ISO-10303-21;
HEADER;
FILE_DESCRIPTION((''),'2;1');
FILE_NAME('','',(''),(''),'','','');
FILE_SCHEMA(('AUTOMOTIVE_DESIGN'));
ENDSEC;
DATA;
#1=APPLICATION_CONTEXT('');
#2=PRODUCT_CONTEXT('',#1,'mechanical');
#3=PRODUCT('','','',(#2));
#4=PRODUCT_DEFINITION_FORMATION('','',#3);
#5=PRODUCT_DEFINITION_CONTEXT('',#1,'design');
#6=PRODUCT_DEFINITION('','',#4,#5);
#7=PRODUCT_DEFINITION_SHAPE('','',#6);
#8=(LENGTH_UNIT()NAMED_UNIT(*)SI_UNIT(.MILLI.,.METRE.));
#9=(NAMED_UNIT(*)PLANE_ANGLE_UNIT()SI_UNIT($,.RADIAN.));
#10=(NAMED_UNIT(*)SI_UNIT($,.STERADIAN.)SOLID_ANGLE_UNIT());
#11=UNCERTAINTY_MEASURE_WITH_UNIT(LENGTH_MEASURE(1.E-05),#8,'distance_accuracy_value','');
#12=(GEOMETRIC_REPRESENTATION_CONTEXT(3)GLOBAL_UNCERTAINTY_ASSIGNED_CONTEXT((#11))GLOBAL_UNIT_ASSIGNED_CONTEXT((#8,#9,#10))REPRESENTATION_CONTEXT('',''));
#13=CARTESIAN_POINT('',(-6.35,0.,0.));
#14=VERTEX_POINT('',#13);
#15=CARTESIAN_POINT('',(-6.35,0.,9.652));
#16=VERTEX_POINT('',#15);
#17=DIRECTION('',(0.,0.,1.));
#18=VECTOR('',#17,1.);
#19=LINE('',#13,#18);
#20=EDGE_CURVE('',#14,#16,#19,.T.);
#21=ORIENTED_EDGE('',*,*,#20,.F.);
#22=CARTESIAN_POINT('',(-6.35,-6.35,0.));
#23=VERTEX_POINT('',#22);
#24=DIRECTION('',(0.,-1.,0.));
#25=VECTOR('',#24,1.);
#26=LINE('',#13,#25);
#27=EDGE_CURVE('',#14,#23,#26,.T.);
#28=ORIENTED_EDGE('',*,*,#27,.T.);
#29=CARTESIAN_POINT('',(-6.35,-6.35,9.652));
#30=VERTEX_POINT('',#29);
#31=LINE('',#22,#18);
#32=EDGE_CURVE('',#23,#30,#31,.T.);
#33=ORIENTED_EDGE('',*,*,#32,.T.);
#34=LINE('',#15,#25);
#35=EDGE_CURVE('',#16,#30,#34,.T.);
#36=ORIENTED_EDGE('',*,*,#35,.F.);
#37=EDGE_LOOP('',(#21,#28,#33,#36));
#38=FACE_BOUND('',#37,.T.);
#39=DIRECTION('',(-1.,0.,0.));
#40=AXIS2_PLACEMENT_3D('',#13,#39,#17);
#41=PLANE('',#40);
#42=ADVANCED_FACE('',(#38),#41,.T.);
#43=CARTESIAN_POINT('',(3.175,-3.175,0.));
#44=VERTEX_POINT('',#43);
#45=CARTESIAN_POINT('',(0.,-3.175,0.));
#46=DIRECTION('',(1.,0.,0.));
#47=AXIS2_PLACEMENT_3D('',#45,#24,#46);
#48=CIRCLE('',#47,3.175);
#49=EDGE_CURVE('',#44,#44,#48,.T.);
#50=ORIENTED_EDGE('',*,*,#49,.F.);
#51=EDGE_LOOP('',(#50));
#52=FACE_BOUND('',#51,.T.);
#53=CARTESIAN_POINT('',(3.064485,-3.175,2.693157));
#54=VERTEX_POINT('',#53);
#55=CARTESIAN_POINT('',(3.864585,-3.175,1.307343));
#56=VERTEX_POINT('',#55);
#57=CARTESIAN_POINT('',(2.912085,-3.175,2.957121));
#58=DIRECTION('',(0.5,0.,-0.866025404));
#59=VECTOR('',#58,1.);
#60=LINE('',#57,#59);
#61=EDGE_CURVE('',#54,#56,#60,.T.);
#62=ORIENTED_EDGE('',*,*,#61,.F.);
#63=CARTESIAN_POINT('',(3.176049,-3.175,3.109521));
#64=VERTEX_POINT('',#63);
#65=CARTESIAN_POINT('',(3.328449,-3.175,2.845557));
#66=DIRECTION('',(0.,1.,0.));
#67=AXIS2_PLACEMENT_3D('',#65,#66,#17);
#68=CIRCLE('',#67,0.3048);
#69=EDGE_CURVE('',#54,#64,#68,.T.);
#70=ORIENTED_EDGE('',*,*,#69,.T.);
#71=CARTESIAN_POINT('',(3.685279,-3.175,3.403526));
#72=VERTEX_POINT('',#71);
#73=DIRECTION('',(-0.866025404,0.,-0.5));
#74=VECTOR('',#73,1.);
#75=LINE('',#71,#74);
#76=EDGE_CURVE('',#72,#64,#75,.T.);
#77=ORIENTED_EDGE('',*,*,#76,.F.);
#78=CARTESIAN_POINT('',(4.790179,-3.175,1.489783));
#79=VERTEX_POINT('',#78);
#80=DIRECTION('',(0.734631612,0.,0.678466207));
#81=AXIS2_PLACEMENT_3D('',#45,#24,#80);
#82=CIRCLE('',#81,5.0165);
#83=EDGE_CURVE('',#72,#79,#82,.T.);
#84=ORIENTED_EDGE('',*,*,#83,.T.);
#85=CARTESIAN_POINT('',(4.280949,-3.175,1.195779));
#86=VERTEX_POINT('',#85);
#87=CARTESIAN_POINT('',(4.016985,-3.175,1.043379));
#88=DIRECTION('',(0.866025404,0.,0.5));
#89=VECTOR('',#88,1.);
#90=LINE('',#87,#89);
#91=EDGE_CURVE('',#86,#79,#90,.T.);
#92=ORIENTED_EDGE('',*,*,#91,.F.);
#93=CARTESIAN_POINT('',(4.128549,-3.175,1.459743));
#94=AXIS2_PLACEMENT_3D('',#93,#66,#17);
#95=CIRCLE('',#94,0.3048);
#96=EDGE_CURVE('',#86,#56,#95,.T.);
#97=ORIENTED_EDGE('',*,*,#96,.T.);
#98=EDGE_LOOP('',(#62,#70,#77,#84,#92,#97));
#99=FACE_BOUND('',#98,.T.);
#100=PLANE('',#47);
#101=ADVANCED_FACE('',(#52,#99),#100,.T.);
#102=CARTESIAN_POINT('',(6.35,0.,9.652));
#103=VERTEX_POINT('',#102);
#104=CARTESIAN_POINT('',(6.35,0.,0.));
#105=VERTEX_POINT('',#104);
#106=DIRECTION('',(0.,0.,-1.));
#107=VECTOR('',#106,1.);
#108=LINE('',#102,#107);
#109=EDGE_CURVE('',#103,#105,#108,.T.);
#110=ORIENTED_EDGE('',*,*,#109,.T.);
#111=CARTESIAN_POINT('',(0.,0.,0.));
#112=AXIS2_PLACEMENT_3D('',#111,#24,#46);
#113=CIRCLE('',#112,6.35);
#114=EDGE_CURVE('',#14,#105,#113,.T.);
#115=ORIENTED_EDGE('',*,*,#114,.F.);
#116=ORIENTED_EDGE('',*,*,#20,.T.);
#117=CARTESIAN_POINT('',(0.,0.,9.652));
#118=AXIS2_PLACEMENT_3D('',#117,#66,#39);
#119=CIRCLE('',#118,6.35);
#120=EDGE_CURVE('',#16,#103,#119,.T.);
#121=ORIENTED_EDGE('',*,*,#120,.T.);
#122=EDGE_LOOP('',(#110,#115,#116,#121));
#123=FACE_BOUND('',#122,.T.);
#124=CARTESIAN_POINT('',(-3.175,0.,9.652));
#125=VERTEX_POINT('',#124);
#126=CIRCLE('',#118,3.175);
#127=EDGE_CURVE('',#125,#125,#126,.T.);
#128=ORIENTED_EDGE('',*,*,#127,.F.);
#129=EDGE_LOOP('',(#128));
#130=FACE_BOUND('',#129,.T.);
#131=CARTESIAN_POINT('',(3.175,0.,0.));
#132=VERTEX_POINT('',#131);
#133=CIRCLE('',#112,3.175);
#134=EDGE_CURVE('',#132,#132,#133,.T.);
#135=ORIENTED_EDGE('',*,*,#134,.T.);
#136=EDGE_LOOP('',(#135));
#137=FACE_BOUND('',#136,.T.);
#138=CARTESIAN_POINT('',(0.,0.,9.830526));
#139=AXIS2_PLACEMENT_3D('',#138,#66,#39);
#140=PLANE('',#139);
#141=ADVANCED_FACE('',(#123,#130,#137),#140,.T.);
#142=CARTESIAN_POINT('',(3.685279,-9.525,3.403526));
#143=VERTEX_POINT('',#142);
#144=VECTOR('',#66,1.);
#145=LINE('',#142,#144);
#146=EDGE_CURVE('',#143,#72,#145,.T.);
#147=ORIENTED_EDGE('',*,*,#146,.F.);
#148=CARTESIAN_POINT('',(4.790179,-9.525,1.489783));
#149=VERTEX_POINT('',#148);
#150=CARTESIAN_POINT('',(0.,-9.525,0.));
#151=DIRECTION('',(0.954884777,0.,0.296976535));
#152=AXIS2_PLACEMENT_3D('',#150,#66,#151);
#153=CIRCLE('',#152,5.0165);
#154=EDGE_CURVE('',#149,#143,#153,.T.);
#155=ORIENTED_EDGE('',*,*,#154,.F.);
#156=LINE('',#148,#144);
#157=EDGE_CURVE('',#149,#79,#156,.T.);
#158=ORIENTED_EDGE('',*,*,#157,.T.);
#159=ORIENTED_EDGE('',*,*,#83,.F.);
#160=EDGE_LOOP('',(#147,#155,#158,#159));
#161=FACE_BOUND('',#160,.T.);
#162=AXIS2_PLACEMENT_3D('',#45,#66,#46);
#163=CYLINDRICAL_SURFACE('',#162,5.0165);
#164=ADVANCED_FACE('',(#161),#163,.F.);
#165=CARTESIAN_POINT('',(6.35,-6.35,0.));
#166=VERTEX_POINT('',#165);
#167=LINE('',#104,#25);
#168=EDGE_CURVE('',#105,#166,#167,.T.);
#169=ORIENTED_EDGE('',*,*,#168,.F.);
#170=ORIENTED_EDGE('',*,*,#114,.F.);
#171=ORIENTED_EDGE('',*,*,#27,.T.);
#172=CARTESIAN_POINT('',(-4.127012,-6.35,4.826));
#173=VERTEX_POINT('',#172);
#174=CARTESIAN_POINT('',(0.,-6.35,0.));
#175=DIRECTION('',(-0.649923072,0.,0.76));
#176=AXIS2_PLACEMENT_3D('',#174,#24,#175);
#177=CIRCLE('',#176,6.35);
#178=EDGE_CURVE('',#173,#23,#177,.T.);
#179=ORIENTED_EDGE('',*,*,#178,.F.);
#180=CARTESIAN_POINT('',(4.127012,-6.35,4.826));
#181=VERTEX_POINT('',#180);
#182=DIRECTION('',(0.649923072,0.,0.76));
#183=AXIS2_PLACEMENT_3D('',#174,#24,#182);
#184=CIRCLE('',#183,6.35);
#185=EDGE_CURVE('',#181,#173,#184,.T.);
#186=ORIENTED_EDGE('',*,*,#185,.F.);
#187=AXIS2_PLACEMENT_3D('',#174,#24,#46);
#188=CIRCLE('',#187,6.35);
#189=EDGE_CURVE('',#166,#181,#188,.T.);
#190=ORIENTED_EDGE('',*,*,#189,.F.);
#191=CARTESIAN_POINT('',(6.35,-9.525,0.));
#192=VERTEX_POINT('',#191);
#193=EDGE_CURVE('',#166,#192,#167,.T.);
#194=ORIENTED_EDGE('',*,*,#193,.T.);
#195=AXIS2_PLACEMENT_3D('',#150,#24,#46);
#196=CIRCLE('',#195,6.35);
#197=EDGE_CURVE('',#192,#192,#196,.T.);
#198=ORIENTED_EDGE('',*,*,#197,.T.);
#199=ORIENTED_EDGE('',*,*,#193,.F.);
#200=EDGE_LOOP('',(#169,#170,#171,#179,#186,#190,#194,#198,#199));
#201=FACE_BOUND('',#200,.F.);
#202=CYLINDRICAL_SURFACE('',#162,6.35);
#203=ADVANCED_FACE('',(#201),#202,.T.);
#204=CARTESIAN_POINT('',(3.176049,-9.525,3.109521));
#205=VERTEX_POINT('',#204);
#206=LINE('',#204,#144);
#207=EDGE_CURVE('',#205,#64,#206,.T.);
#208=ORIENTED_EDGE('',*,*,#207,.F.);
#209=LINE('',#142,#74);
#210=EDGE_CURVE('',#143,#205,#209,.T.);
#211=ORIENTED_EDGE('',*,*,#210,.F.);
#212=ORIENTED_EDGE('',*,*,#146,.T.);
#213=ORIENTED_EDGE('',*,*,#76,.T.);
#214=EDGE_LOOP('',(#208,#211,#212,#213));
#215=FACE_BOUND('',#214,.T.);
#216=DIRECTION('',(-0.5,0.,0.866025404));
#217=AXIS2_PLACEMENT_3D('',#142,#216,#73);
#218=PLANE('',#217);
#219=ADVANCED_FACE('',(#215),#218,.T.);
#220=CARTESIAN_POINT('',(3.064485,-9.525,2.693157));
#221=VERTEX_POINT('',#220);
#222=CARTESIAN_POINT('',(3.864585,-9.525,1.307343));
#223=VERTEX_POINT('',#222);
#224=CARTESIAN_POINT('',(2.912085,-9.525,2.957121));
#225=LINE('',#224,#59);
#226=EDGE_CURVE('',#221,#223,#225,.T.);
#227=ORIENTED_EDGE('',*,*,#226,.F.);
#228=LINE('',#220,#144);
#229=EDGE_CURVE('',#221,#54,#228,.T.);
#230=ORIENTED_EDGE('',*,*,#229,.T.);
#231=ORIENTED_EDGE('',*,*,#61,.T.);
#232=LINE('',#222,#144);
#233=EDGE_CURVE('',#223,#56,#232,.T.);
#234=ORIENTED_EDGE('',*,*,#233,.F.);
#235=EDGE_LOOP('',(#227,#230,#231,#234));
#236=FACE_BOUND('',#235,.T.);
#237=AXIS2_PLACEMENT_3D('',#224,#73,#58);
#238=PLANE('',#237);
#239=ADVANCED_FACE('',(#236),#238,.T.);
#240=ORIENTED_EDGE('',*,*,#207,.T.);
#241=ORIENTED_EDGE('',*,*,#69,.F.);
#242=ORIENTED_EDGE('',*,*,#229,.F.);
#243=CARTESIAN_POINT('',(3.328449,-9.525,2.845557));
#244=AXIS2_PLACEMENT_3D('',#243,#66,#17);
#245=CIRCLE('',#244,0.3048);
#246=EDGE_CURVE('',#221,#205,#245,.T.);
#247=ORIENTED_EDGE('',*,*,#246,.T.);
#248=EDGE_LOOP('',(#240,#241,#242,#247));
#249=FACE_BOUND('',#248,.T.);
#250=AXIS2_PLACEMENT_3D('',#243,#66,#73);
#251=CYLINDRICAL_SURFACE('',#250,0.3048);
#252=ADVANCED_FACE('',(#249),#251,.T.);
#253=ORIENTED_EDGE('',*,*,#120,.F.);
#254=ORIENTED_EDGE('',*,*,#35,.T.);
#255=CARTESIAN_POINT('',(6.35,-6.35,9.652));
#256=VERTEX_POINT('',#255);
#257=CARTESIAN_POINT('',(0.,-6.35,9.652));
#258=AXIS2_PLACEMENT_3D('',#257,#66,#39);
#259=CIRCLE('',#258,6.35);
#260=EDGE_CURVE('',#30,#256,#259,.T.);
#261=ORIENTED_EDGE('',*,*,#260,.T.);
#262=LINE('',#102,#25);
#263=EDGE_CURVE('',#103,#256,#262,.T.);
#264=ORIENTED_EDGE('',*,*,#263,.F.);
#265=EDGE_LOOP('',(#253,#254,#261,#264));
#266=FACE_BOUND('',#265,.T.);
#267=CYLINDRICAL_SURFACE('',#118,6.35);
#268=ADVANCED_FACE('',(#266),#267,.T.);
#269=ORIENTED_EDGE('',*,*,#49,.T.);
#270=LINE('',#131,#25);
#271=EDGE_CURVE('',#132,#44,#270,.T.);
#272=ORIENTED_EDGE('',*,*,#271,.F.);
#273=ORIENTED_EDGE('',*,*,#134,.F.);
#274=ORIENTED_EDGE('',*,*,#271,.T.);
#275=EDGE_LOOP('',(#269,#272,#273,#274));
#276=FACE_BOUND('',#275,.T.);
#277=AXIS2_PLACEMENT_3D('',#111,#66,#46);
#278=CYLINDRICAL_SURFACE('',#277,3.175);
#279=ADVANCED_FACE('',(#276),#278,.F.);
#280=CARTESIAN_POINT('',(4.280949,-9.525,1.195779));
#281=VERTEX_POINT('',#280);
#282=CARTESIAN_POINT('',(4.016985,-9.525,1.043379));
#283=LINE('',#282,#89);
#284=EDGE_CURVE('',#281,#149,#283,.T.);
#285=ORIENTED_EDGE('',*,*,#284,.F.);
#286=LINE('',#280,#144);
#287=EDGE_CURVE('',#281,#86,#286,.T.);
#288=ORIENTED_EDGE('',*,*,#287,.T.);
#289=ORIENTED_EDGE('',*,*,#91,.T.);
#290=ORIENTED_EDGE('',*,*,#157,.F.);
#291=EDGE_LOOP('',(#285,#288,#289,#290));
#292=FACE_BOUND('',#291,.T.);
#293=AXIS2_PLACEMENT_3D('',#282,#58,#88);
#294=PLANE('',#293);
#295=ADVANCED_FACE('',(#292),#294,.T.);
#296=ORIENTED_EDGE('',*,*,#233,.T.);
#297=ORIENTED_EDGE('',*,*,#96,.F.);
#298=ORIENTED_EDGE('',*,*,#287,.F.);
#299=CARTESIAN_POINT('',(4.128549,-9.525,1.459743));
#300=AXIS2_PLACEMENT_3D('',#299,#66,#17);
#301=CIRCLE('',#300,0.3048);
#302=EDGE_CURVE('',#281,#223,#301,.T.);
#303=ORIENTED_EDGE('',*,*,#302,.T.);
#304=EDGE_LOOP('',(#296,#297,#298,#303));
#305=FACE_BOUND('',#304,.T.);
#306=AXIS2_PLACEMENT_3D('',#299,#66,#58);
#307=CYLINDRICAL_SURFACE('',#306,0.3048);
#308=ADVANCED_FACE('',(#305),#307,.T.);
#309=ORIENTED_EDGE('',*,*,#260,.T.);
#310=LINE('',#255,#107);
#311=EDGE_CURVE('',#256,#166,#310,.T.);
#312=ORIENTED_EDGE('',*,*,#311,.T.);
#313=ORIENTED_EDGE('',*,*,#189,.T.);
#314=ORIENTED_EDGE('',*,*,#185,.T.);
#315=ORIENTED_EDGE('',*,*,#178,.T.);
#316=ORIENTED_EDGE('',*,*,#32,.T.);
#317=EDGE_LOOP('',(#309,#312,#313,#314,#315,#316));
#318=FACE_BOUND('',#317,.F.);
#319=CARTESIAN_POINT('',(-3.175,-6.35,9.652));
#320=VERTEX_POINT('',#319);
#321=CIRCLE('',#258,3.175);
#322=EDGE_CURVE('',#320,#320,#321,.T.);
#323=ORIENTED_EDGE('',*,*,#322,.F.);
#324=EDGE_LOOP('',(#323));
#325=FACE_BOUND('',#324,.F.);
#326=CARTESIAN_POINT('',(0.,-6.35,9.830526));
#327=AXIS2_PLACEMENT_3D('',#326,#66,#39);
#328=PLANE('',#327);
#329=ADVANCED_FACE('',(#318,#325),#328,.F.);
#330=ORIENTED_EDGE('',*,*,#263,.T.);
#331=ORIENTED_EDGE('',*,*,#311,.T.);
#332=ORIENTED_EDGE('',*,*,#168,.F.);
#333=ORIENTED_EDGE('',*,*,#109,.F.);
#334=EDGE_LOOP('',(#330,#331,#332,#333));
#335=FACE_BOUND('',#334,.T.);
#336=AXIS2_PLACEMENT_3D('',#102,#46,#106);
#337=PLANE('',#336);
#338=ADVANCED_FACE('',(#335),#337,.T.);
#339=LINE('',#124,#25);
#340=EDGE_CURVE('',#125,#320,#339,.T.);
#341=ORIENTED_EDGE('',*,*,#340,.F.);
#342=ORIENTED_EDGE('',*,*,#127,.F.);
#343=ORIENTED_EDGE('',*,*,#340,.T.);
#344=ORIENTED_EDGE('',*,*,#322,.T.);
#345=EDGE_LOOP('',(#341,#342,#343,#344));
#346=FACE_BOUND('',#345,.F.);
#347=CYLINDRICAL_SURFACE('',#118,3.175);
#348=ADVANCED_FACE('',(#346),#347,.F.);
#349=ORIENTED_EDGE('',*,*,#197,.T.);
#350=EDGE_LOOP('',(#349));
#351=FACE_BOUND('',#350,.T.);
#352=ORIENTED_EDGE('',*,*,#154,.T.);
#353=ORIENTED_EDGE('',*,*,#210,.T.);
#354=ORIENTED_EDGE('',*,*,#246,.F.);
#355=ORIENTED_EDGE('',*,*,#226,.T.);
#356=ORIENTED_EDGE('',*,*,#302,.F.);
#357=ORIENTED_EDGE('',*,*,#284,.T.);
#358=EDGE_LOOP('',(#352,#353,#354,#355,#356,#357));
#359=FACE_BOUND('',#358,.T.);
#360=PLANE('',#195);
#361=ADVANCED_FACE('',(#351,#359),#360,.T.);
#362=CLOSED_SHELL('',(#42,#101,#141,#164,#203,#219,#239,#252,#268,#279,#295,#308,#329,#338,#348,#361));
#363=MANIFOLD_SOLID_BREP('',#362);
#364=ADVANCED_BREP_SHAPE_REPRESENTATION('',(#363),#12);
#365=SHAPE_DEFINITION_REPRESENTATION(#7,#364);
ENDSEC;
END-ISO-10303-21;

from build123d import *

# Parameters (mm, degrees)
F0_R     = 6.35
F0_R_2   = 3.175
F1_DEPTH = 3.175
F2_R     = 6.35
F2_R_2   = 5.0165
F3_DEPTH = 6.35
F4_R     = 3.175
F5_DEPTH = 6.35
F7_DEPTH = 6.35
F8_R     = 0.3048


# Not quite as in the source:
# - a feature names something its author has since deleted; it is built from what else it names


with BuildPart() as f1:
    # F0 (on Front) → F1 (new body)
    with BuildSketch(Plane.XZ):
        Circle(F0_R)
        Circle(F0_R_2, mode=Mode.SUBTRACT)
    extrude(amount=F1_DEPTH)

    # F2 (on face) → F3 (join)
    with BuildSketch(Plane.XZ.offset(3.175)):
        Circle(F2_R)
        Circle(F2_R_2, mode=Mode.SUBTRACT)
    extrude(amount=F3_DEPTH)

    # F4 (on face) → F5 (join)
    with BuildSketch(Plane(origin=(0, 0, 0), x_dir=(-1, 0, 0), z_dir=(0, 1, 0))):
        with BuildLine():
            ThreePointArc((-6.35, 9.652), (-5.7675394704, 6.9953125029), (-4.1270115096, 4.826))
            ThreePointArc((-4.1270115096, 4.826), (0, 6.35), (4.1270115096, 4.826))
            ThreePointArc((4.1270115096, 4.826), (5.7675394704, 6.9953125029), (6.35, 9.652))
            ThreePointArc((6.35, 9.652), (0, 16.002), (-6.35, 9.652))
        make_face()
        with Locations((0, 9.652)):
            Circle(F4_R, mode=Mode.SUBTRACT)
        with BuildLine():
            Line((-6.35, 9.652), (-6.35, 0))
            ThreePointArc((-6.35, 0), (-5.7675394704, 2.6566874971), (-4.1270115096, 4.826))
            ThreePointArc((-4.1270115096, 4.826), (-5.7675394704, 6.9953125029), (-6.35, 9.652))
        make_face()
        with BuildLine():
            ThreePointArc((4.1270115096, 4.826), (5.7675394704, 2.6566874971), (6.35, 0))
            Line((6.35, 0), (6.35, 9.652))
            ThreePointArc((6.35, 9.652), (5.7675394704, 6.9953125029), (4.1270115096, 4.826))
        make_face()
    extrude(amount=-F5_DEPTH)

    # F6 (on face) → F7 (join, through all)
    with BuildSketch(Plane.XZ.offset(9.525)):
        with BuildLine():
            Line((4.0169846278, 1.0433785314), (4.7901794841, 1.4897827897))
            ThreePointArc((4.7901794841, 1.4897827897), (4.3444164381, 2.50825), (3.6852794841, 3.403525727))
            Line((3.6852794841, 3.403525727), (2.9120846278, 2.9571214686))
            Line((2.9120846278, 2.9571214686), (4.0169846278, 1.0433785314))
        make_face()
    extrude(amount=-F7_DEPTH)

    # F8
    f8_edges = [f1.edges().sort_by_distance(p)[0] for p in [
        (2.912085, -6.35, 2.957121),
        (4.016985, -6.35, 1.043379),
    ]]
    fillet(f8_edges, radius=F8_R)


solid = f1.part
